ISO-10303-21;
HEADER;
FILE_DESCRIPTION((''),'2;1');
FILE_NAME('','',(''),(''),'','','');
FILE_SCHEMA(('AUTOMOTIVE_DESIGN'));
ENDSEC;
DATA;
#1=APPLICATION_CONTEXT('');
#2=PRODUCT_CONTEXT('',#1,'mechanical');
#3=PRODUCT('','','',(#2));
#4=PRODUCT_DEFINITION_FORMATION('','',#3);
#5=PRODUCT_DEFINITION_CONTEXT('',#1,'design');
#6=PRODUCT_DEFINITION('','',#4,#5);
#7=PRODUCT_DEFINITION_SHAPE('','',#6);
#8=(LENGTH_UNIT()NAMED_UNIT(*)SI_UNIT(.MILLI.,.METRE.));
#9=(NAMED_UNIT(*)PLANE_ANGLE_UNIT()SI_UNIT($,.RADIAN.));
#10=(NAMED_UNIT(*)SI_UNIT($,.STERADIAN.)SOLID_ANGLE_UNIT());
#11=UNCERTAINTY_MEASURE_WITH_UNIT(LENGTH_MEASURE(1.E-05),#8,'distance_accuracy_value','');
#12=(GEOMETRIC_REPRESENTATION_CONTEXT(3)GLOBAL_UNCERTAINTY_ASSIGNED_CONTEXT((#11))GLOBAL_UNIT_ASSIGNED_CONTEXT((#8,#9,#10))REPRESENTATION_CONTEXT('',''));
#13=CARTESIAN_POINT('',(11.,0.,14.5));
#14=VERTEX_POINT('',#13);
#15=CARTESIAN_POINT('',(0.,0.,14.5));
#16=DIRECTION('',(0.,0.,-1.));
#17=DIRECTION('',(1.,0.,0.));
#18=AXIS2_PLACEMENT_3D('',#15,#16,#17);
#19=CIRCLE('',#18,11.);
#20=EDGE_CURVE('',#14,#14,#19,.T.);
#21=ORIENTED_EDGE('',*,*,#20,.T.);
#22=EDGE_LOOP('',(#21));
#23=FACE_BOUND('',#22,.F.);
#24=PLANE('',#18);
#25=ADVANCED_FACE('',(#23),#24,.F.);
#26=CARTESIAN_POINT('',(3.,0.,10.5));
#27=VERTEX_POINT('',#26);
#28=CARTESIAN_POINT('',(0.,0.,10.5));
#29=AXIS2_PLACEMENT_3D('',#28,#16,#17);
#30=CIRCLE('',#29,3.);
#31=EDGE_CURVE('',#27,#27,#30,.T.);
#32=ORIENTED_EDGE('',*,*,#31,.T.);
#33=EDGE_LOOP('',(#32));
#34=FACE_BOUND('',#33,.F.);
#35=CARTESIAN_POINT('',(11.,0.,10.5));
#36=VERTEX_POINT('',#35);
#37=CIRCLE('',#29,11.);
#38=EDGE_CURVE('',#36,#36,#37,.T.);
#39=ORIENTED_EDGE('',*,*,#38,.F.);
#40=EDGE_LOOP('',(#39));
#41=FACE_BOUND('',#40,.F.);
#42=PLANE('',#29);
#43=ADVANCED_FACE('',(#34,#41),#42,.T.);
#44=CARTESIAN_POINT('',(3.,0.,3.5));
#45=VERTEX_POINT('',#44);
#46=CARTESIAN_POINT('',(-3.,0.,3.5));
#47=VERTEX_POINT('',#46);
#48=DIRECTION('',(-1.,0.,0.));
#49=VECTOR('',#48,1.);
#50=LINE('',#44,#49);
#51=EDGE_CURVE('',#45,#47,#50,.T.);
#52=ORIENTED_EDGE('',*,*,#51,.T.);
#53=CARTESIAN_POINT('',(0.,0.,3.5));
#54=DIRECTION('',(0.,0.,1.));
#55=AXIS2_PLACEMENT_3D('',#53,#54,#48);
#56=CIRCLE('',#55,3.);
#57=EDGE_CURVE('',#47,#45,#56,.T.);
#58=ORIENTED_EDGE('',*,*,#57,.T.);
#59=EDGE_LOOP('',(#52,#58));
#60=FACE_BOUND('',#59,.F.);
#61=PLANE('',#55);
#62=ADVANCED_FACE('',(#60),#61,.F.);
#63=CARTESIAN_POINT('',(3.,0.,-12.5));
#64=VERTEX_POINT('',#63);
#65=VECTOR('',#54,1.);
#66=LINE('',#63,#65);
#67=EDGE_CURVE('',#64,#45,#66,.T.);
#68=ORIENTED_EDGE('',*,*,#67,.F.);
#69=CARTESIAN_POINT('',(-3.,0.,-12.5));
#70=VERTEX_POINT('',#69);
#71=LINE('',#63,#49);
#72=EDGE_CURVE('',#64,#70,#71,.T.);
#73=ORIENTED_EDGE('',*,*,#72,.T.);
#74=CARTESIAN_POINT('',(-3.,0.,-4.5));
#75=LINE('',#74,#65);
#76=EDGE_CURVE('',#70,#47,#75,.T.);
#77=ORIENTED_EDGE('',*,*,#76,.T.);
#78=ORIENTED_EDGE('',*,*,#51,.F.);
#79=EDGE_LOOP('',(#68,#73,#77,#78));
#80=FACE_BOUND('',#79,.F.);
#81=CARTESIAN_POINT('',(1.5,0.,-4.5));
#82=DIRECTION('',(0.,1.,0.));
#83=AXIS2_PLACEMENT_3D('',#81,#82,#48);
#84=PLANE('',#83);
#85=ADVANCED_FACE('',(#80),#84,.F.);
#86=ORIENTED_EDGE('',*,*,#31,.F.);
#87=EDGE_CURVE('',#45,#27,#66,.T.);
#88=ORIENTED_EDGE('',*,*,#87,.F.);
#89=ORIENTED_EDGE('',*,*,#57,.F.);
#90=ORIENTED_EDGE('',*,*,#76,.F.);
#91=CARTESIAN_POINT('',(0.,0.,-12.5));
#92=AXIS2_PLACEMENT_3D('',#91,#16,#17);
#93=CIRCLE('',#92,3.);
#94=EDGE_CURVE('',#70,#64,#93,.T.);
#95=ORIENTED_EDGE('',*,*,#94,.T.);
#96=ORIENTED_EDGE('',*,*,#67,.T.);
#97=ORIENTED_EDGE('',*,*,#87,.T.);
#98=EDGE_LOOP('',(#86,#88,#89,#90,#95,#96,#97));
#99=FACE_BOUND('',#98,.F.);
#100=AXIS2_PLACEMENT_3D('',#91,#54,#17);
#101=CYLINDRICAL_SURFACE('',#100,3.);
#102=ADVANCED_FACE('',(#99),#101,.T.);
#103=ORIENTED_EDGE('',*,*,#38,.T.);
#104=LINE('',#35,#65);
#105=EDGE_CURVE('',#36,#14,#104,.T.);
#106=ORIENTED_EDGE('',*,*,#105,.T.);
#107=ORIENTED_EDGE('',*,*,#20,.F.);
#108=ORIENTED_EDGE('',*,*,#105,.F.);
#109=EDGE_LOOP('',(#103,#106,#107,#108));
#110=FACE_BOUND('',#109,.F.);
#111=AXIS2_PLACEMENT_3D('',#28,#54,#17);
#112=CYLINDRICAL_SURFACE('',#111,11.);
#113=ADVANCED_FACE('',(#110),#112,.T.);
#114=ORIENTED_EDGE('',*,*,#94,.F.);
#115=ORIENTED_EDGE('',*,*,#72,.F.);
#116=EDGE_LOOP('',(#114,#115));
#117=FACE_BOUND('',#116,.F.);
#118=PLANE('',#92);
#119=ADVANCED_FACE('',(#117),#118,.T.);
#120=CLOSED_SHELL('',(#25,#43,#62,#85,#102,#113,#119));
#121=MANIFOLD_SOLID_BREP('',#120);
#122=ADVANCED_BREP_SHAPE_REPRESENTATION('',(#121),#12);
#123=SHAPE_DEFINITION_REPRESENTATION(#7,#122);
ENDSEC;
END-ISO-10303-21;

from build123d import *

# Parameters (mm, degrees)
F0_W     = 3
F0_H     = 7
F0_H_2   = 2
F0_H_3   = 16
F2_ANGLE = 180


# Not quite as in the source:
# - a feature names something its author has since deleted; it is built from what else it names


with BuildPart() as f1:
    # F0 (on Front) → F1 (revolve)
    with BuildSketch(Plane.XZ):
        Polygon((0, 14.5), (0, 12.5), (3, 12.5), (3, 10.5), (11, 10.5), (11, 14.5), align=None)
        with Locations((1.5, 7)):
            Rectangle(F0_W, F0_H)
        with Locations((1.5, 11.5)):
            Rectangle(F0_W, F0_H_2)
        with Locations((1.5, -4.5)):
            Rectangle(F0_W, F0_H_3)
    revolve(axis=Axis((0, 0, 1), (0, 0, -1)))

    # F0 (on Front) → F2 (revolve, cut)
    with BuildSketch(Plane.XZ):
        with Locations((-1.5, -4.5)):
            Rectangle(F0_W, F0_H_3)
    revolve(axis=Axis((0, 0, 1), (0, 0, 1)), revolution_arc=F2_ANGLE, mode=Mode.SUBTRACT)


solid = f1.part
